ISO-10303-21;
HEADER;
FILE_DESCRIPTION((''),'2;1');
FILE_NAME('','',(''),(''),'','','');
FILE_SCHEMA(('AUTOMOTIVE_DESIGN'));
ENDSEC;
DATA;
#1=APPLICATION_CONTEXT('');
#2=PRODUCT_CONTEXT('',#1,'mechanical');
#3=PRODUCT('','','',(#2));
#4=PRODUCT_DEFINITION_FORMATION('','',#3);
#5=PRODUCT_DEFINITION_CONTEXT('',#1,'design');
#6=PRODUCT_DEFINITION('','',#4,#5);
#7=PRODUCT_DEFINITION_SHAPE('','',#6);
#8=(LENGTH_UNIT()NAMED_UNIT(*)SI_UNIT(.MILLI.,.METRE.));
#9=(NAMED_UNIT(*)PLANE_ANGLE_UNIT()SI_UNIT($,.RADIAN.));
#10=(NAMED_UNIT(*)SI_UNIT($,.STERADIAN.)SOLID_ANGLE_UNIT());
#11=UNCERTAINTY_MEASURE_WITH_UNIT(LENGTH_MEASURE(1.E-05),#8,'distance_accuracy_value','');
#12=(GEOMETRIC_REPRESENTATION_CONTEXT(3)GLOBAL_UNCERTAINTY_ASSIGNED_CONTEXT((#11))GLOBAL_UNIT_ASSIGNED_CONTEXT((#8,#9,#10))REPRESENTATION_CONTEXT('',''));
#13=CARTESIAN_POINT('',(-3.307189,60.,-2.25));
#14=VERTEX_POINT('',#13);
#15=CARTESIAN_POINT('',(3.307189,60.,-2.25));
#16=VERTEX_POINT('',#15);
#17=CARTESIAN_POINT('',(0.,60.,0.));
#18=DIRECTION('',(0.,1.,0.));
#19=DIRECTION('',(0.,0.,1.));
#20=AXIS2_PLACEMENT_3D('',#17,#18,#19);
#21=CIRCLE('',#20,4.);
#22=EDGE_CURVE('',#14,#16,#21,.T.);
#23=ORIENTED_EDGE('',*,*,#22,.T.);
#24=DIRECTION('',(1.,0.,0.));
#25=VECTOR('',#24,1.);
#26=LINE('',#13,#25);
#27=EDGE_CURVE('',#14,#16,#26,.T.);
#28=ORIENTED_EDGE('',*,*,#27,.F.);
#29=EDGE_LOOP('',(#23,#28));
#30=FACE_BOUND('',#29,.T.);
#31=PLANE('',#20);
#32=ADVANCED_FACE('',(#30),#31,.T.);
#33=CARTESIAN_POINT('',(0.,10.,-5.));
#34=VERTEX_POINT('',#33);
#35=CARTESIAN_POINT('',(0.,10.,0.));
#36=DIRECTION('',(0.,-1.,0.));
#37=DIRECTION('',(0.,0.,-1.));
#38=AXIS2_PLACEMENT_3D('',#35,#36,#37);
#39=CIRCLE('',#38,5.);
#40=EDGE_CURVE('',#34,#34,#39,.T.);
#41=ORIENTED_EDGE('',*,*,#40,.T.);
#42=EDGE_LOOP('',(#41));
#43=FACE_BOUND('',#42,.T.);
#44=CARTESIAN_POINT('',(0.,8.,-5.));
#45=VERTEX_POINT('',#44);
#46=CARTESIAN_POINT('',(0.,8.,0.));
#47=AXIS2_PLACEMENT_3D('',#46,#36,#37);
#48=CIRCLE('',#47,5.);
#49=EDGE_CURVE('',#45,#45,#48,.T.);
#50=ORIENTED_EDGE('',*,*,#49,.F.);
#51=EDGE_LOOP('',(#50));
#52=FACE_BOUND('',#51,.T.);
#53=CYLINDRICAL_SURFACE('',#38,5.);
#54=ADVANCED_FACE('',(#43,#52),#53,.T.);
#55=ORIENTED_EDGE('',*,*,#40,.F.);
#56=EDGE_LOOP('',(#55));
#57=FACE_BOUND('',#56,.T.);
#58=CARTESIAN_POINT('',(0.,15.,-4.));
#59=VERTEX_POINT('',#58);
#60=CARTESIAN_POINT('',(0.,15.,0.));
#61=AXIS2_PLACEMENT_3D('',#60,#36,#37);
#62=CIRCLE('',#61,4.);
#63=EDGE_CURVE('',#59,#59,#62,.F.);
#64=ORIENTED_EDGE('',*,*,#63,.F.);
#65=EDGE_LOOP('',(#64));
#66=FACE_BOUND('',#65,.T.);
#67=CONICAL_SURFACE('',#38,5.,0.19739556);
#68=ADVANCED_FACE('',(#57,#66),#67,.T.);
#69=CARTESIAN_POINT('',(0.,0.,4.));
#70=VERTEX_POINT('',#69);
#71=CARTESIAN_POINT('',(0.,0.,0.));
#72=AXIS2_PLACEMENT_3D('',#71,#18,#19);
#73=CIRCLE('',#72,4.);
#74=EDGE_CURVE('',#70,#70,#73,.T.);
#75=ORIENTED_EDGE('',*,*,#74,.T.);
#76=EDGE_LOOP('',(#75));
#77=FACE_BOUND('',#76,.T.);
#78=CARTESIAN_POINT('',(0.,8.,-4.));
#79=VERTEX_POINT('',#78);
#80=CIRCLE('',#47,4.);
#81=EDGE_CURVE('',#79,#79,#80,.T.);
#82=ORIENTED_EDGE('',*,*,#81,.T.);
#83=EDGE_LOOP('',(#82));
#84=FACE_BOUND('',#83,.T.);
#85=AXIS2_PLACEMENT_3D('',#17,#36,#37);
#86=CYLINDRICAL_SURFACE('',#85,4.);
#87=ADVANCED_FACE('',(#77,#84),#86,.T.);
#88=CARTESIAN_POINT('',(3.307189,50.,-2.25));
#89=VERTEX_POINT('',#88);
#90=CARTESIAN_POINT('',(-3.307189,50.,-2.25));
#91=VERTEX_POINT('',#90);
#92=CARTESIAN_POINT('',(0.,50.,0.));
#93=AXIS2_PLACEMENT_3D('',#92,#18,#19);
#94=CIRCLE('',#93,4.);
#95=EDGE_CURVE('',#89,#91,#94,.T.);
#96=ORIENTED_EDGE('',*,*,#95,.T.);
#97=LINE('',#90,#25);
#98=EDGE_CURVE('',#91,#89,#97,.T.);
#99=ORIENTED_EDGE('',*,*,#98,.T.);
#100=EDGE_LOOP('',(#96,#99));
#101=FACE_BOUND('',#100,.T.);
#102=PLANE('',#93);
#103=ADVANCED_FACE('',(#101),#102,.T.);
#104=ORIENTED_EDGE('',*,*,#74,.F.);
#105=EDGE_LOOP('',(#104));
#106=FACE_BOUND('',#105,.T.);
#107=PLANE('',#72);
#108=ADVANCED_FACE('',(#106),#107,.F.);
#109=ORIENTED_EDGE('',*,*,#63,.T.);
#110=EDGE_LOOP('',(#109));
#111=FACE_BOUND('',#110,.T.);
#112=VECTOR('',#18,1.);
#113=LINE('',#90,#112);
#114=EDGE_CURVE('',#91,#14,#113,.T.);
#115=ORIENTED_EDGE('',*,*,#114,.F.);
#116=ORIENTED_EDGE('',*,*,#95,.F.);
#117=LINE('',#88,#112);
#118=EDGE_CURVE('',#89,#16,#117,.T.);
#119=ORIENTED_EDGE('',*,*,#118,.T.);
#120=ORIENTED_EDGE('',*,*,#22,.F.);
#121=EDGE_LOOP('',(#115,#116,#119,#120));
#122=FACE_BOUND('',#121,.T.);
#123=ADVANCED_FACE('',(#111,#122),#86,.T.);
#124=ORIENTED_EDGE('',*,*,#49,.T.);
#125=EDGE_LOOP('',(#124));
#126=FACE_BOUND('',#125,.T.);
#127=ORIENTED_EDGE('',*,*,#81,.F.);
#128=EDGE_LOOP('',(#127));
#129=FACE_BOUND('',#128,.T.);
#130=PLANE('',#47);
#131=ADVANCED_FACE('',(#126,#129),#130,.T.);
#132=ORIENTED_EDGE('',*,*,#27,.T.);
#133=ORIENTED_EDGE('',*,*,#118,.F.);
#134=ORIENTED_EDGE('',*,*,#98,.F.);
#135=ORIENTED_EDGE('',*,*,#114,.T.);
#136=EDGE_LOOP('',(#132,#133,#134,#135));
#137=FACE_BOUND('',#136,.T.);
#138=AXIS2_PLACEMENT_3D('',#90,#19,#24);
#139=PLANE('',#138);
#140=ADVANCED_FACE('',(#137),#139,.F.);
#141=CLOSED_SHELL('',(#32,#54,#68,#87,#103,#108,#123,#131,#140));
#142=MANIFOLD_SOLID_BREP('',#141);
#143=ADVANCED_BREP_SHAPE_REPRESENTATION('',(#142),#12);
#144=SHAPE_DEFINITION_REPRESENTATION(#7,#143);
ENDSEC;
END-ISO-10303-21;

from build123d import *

# Parameters (mm, degrees)
SKETCH1_R           = 4
BOSS_EXTRUDE1_DEPTH = 60
SKETCH2_R           = 5
BOSS_EXTRUDE2_DEPTH = 2
CHAMFER1_SIZE       = 1
CHAMFER1_SIZE_2     = 5
CUT_EXTRUDE1_START  = -10
CUT_EXTRUDE1_DEPTH  = 10


with BuildPart() as part:
    # Sketch1 → Boss-Extrude1 (new body)
    with BuildSketch(Plane(origin=(0, 0, 0), x_dir=(1, 0, 0), z_dir=(0, 1, 0))):
        with Locations(Location((0, 0, 0), (0, 0, 270))):
            Circle(SKETCH1_R)
    extrude(amount=BOSS_EXTRUDE1_DEPTH)

    # Sketch2 → Boss-Extrude2 (add)
    with BuildSketch(Plane(origin=(0, 8, 0), x_dir=(-1, 0, 0), z_dir=(0, -1, 0))):
        with Locations(Location((0, 0, 0), (0, 0, 90))):
            Circle(SKETCH2_R)
    extrude(amount=-BOSS_EXTRUDE2_DEPTH)

    # Chamfer1
    # the kernel refuses this chamfer: 5, 1 mm, written as the material it adds along each edge
    with BuildSketch(Plane(origin=(0, 10, 0), x_dir=(0, 0, 1), z_dir=(1, 0, 0))) as chamfer1_piece_1_section:
        Polygon((4 + CHAMFER1_SIZE, 0), (4, -CHAMFER1_SIZE_2), (4, 0), align=None)
    chamfer1_piece_1 = revolve(axis=Axis((0, 10, 0), (0, -1, 0)), mode=Mode.PRIVATE)
    chamfer1_piece_1 = chamfer1_piece_1 & Plane(origin=(0, 12.589419048, 0), x_dir=(0, 0, -1), z_dir=(0, -1, 0)) * Cylinder(5, 20, mode=Mode.PRIVATE)
    add(chamfer1_piece_1)

    # Sketch3 → Cut-Extrude1 (cut)
    with BuildSketch(Plane(origin=(0, 60, 0), x_dir=(1, 0, 0), z_dir=(0, 1, 0)).offset(CUT_EXTRUDE1_START)):
        with BuildLine():
            Line((-3.307189139, 2.25), (3.307189139, 2.25))
            ThreePointArc((3.307189139, 2.25), (0, 4), (-3.307189139, 2.25))
        make_face()
    extrude(amount=CUT_EXTRUDE1_DEPTH, mode=Mode.SUBTRACT)


solid = part.part
